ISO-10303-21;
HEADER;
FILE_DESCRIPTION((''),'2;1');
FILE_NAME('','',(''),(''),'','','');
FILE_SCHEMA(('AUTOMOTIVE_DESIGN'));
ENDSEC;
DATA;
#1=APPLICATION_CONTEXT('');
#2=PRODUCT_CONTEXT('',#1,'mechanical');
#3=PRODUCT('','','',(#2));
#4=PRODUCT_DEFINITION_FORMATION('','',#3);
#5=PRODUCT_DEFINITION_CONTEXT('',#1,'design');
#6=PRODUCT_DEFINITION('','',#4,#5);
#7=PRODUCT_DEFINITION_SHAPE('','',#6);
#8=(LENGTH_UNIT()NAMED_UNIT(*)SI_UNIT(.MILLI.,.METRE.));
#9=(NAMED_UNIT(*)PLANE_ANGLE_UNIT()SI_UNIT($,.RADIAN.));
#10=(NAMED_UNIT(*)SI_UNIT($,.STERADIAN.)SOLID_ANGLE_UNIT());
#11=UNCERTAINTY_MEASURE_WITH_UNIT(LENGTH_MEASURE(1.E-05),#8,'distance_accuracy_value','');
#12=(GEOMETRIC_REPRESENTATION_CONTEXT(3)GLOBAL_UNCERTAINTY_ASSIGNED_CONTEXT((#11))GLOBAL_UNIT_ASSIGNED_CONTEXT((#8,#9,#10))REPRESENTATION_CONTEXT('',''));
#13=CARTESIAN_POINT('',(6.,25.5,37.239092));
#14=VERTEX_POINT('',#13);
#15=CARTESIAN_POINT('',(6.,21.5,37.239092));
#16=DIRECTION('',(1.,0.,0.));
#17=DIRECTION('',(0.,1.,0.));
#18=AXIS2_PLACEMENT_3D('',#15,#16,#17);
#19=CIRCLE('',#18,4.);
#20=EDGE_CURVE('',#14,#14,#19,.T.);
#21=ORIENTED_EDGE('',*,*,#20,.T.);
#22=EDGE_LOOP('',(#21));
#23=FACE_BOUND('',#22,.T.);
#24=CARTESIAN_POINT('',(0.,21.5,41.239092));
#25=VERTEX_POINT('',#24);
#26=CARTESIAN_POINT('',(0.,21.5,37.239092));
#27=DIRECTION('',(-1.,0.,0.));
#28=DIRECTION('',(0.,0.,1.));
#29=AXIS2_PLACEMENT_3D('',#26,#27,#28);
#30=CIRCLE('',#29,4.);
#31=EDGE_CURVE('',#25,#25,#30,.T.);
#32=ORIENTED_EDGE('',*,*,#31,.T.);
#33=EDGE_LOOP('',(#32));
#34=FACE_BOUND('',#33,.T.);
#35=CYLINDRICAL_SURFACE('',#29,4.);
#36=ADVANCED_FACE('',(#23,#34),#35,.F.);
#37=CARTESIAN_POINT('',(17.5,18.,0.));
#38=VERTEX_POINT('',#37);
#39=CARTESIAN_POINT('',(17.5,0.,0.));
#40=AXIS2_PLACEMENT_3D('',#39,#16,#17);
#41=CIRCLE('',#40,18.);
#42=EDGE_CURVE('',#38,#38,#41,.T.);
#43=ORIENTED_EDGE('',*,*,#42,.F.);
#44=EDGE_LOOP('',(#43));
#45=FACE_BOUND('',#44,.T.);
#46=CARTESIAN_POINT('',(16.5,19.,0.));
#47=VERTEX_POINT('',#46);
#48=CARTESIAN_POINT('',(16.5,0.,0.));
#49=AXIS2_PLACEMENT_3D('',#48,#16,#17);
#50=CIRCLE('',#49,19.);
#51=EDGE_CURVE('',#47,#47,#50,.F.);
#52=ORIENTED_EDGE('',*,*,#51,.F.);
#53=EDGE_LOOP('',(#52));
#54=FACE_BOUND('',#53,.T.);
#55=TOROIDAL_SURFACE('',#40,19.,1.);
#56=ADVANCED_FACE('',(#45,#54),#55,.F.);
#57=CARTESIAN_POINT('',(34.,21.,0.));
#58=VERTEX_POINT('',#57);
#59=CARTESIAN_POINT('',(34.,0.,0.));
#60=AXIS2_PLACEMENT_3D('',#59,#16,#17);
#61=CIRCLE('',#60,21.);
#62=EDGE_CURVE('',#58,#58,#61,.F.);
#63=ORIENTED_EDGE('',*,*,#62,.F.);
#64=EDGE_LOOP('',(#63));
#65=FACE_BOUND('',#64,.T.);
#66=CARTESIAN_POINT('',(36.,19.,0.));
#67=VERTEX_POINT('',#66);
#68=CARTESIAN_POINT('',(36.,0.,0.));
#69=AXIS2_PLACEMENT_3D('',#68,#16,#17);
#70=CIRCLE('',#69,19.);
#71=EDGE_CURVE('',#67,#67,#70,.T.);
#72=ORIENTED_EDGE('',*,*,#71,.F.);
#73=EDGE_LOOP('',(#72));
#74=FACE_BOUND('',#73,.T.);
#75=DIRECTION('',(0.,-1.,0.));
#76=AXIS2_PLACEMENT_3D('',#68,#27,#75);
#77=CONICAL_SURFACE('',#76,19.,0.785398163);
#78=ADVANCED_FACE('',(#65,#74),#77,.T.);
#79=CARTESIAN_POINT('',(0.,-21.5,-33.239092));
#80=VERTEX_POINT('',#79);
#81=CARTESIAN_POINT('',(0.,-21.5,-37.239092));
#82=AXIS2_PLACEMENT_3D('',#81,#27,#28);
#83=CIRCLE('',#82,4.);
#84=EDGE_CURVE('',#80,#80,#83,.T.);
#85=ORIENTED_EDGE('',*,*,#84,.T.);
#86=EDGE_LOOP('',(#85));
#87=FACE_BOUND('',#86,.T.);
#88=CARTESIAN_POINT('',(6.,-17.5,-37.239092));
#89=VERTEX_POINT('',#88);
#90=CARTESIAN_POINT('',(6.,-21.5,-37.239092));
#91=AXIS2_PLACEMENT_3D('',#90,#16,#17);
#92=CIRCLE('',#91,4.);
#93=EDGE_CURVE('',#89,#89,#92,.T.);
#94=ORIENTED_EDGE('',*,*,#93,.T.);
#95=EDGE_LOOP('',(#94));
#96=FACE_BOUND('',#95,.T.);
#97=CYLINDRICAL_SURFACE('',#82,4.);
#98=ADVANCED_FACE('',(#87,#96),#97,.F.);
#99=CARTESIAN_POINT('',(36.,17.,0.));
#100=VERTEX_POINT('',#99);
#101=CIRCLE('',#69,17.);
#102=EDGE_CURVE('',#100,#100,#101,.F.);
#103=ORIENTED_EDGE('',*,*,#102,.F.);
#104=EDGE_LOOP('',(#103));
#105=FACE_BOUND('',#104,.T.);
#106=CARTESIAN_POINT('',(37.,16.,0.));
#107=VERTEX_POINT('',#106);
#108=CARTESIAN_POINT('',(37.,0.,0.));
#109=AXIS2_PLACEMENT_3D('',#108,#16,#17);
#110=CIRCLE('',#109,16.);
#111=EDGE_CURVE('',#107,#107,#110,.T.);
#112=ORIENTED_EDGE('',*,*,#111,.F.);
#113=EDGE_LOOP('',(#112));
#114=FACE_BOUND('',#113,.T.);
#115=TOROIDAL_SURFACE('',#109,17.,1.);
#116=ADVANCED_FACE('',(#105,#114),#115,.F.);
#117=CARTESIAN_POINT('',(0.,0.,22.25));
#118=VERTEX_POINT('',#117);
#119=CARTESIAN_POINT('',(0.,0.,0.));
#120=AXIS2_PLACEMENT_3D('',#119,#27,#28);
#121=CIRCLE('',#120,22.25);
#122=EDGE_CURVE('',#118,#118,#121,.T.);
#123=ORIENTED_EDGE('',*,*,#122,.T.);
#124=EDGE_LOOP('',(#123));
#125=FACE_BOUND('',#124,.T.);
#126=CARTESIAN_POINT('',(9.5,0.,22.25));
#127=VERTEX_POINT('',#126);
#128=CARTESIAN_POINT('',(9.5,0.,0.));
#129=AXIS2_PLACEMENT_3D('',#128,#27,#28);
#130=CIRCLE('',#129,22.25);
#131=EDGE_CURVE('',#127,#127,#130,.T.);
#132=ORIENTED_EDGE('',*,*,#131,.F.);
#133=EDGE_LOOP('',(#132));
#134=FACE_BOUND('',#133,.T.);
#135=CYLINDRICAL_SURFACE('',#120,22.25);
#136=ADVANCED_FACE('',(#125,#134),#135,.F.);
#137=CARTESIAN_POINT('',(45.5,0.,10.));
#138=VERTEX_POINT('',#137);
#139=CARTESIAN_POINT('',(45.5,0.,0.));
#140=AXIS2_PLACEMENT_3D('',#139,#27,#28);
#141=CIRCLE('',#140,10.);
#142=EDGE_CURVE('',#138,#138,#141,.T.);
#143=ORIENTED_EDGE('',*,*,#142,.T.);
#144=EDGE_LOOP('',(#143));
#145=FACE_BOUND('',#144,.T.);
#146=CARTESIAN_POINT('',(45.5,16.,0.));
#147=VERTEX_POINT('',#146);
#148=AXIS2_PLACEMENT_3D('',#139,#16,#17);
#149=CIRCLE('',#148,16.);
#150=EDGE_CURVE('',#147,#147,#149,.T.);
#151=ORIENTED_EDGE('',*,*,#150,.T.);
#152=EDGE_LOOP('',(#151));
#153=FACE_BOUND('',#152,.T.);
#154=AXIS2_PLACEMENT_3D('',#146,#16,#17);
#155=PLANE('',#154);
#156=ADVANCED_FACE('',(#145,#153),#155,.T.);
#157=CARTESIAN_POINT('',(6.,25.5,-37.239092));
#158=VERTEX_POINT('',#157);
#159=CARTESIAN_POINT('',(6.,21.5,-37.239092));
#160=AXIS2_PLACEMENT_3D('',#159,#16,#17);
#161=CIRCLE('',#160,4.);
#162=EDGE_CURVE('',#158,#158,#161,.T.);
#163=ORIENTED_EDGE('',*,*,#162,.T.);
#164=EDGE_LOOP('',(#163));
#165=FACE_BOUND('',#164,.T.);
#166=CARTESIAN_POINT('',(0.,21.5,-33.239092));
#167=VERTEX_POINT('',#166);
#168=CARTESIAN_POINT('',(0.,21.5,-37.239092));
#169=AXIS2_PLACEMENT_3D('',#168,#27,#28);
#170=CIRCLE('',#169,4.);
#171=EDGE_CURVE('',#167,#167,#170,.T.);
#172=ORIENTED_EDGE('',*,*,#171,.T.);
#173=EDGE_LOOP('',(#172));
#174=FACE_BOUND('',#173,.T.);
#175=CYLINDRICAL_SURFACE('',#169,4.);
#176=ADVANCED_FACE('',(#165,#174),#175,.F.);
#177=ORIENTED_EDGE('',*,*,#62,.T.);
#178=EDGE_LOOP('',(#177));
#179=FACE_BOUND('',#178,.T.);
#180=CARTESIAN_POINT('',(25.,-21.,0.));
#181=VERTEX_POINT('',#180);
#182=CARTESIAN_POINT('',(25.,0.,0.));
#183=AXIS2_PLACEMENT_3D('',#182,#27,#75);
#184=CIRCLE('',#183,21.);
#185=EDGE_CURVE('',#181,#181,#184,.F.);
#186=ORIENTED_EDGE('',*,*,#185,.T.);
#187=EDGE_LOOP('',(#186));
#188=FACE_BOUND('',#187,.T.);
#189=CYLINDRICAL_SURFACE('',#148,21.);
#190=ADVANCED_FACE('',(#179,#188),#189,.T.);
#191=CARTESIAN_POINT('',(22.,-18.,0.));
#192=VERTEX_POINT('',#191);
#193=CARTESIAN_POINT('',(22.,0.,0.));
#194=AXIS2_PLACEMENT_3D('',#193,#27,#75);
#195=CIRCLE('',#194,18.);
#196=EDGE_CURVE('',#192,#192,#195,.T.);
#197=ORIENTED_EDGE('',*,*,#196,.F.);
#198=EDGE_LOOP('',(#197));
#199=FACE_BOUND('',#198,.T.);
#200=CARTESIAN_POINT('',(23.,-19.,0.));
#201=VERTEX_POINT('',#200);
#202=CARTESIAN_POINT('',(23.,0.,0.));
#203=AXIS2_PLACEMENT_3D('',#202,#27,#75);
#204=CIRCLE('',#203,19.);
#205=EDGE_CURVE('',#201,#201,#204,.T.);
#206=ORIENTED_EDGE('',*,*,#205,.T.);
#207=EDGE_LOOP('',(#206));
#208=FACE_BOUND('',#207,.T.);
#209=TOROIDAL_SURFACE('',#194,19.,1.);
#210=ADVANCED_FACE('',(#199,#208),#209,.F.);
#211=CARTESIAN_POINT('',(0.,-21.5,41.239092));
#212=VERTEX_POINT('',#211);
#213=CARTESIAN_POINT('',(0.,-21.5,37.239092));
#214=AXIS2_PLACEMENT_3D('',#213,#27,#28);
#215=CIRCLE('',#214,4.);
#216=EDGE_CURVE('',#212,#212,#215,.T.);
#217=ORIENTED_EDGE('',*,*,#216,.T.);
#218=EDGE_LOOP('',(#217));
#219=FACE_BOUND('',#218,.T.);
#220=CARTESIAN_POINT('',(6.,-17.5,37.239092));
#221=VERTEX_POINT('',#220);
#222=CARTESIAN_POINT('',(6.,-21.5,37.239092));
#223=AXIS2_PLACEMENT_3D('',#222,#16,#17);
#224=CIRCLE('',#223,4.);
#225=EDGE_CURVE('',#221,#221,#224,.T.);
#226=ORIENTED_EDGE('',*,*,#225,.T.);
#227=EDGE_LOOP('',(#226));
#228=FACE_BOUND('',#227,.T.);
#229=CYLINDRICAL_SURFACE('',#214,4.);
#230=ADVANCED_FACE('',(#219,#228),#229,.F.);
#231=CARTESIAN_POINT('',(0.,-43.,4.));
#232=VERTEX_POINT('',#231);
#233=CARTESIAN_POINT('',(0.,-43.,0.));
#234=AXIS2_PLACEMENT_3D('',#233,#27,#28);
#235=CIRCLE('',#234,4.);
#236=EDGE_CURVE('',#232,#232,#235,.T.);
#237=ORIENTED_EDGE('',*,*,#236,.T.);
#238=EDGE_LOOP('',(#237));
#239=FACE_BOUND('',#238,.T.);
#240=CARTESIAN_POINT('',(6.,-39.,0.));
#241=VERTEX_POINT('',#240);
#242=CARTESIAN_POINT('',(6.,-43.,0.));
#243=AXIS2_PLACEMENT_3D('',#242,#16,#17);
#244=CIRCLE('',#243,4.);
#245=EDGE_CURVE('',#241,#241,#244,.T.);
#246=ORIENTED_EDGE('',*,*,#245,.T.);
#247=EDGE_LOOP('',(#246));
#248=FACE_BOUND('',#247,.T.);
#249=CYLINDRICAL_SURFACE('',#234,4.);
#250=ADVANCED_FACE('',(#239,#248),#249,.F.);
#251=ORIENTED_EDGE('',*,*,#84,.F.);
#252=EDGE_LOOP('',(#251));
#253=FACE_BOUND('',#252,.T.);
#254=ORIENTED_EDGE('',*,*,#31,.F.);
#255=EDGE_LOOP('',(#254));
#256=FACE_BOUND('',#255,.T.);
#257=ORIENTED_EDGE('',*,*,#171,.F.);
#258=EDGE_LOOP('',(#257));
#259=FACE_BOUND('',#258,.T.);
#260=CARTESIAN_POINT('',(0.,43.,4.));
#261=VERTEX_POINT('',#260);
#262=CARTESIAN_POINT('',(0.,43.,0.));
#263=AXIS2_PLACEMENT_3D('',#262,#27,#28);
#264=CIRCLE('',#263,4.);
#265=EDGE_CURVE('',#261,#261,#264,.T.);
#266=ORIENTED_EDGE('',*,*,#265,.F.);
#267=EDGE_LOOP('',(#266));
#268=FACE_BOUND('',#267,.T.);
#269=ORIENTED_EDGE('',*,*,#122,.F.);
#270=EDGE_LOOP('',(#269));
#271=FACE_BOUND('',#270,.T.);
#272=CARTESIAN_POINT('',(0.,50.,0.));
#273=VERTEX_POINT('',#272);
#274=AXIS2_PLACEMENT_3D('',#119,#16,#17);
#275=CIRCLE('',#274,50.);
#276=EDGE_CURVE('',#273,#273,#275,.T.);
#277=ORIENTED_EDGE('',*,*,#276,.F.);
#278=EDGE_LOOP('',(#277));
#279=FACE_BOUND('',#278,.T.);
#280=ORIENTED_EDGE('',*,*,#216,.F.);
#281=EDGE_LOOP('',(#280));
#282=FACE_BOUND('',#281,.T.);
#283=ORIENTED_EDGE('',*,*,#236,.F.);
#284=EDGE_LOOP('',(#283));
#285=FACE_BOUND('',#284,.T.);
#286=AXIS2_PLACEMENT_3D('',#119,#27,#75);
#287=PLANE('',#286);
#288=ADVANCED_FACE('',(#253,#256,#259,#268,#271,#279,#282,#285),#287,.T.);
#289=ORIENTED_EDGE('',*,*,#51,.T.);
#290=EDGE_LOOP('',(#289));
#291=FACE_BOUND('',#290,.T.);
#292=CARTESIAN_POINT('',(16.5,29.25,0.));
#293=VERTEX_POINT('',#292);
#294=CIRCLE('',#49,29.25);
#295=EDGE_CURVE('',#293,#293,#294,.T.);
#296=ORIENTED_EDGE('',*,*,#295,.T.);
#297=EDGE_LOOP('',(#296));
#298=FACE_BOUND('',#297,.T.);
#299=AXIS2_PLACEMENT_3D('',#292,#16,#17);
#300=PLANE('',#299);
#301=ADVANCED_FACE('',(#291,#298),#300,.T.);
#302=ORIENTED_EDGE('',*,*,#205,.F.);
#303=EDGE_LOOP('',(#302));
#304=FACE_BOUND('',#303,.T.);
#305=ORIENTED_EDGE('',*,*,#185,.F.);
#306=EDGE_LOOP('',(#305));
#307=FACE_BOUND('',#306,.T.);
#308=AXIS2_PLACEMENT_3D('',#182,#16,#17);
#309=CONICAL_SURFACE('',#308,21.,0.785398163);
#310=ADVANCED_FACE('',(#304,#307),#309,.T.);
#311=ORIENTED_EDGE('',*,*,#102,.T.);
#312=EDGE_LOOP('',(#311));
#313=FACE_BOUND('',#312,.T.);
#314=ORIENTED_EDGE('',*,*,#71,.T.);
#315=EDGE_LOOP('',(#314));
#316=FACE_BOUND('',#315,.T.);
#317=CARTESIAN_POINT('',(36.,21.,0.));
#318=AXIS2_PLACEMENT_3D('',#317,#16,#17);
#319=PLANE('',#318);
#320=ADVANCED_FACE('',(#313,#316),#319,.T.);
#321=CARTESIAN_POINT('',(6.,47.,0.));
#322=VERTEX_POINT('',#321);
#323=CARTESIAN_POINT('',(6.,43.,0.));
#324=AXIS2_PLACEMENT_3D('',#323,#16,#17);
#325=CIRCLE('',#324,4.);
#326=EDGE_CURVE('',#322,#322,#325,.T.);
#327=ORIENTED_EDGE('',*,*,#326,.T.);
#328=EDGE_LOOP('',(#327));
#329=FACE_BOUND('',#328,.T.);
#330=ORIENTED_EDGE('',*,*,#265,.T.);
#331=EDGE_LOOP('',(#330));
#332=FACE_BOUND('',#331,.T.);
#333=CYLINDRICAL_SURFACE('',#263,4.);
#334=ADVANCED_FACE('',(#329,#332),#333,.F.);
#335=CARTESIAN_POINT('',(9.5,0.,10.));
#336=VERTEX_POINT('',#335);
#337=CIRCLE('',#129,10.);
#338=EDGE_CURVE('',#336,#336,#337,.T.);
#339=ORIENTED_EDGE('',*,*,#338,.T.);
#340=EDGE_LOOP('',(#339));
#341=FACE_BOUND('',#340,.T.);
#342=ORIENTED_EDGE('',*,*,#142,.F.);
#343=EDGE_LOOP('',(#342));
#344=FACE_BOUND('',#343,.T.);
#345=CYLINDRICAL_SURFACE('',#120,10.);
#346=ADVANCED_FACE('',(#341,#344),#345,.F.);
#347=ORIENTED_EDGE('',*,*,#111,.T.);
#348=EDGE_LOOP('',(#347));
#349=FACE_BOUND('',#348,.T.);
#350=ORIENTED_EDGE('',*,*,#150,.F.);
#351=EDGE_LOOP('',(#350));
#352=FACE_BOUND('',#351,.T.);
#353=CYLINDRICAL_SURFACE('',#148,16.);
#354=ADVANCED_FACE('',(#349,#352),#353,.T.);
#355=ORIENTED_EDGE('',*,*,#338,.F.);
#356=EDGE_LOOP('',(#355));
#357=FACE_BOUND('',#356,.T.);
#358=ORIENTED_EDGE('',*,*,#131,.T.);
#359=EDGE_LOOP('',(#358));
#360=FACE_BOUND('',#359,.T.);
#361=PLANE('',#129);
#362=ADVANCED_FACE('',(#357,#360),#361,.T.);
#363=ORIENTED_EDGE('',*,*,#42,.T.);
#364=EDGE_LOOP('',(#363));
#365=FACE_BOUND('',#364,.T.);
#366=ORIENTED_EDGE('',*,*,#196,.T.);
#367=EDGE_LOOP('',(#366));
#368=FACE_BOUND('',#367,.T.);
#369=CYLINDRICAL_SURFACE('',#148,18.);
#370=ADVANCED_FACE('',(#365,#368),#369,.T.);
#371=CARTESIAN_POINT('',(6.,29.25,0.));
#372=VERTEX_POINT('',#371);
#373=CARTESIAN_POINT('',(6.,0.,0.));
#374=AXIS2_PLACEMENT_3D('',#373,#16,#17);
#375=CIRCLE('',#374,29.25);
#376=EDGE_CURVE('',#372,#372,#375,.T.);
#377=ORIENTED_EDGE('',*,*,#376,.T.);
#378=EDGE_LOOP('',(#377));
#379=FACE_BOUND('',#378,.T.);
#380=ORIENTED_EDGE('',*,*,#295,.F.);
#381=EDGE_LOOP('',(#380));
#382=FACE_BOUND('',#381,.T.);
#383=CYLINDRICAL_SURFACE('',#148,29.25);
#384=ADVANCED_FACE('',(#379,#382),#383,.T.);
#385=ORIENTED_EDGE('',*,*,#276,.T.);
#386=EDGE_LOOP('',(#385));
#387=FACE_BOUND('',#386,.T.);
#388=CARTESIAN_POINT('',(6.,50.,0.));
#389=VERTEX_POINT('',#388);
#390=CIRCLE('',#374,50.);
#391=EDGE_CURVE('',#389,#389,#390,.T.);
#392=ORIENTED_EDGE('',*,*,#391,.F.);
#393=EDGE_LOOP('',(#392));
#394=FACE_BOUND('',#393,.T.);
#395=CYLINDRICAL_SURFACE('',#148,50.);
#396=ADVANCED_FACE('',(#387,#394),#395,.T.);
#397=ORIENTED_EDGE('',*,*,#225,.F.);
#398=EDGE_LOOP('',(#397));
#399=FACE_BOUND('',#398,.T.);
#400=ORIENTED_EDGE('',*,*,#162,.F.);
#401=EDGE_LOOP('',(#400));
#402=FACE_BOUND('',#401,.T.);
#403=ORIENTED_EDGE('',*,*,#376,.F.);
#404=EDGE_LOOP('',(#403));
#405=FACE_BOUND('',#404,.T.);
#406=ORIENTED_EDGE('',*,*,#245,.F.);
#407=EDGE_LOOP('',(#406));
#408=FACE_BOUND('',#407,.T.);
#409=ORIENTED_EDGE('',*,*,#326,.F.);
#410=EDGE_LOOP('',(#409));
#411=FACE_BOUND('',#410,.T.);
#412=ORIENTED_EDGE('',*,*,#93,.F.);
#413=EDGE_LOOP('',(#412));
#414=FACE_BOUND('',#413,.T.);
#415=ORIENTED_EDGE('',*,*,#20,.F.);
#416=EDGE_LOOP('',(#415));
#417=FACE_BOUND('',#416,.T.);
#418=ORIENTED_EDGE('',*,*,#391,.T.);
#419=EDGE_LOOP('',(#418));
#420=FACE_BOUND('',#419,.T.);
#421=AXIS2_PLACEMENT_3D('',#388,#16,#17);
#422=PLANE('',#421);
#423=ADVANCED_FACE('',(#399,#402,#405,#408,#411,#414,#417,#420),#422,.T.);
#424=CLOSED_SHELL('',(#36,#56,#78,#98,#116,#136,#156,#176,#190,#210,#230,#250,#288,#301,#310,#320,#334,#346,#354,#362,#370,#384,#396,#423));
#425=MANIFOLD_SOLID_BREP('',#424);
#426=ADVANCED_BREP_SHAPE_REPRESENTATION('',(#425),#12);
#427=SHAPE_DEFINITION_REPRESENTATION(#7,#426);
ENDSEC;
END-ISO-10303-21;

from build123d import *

# Parameters (mm, degrees)
SKETCH2_W     = 9.5
SKETCH2_H     = 22.25
SKETCH2_W_2   = 36
SKETCH2_H_2   = 10
HOLE1_D       = 8
CHAMFER1_SIZE = 2
FILLET1_R     = 1


with BuildPart() as part:
    # Sketch1 → Revolve1 (revolve)
    with BuildSketch(Plane.XY):
        Polygon((0, 0), (0, 50), (6, 50), (6, 29.25), (16.5, 29.25), (16.5, 18), (23, 18), (23, 21), (36, 21), (36, 16), (45.5, 16), (45.5, 0), align=None)
    revolve(axis=Axis((45.5, 0, 0), (-1, 0, 0)))

    # Sketch2 → Cut-Revolve1 (revolve, cut)
    with BuildSketch(Plane.XY, mode=Mode.PRIVATE) as cut_revolve1_sk:
        with Locations((4.75, 11.125)):
            Rectangle(SKETCH2_W, SKETCH2_H)
        with Locations((27.5, 5)):
            Rectangle(SKETCH2_W_2, SKETCH2_H_2)
    revolve(cut_revolve1_sk.sketch.rotate(Axis((0, 0, 0), (1, 0, 0)), 90), axis=Axis((0, 0, 0), (1, 0, 0)), mode=Mode.SUBTRACT)

    # Hole1 (through all)
    with Locations(Plane.ZY):
        with Locations((0, 0), (0, 43), (37.239092363, 21.5), (37.239092363, -21.5), (0, -43), (-37.239092363, -21.5), (-37.239092363, 21.5)):
            Hole(HOLE1_D / 2)

    # Chamfer1
    chamfer1_edges = [part.edges().sort_by_distance(p)[0] for p in [
        (36, -21, 0),
        (23, -21, 0),
    ]]
    chamfer(chamfer1_edges, length=CHAMFER1_SIZE)

    # Fillet1
    fillet1_edges = [part.edges().sort_by_distance(p)[0] for p in [
        (36, -16, 0),
        (23, -18, 0),
        (16.5, -18, 0),
    ]]
    fillet(fillet1_edges, radius=FILLET1_R - 0.0001)  # a hair under: the kernel refuses the full size


solid = part.part
